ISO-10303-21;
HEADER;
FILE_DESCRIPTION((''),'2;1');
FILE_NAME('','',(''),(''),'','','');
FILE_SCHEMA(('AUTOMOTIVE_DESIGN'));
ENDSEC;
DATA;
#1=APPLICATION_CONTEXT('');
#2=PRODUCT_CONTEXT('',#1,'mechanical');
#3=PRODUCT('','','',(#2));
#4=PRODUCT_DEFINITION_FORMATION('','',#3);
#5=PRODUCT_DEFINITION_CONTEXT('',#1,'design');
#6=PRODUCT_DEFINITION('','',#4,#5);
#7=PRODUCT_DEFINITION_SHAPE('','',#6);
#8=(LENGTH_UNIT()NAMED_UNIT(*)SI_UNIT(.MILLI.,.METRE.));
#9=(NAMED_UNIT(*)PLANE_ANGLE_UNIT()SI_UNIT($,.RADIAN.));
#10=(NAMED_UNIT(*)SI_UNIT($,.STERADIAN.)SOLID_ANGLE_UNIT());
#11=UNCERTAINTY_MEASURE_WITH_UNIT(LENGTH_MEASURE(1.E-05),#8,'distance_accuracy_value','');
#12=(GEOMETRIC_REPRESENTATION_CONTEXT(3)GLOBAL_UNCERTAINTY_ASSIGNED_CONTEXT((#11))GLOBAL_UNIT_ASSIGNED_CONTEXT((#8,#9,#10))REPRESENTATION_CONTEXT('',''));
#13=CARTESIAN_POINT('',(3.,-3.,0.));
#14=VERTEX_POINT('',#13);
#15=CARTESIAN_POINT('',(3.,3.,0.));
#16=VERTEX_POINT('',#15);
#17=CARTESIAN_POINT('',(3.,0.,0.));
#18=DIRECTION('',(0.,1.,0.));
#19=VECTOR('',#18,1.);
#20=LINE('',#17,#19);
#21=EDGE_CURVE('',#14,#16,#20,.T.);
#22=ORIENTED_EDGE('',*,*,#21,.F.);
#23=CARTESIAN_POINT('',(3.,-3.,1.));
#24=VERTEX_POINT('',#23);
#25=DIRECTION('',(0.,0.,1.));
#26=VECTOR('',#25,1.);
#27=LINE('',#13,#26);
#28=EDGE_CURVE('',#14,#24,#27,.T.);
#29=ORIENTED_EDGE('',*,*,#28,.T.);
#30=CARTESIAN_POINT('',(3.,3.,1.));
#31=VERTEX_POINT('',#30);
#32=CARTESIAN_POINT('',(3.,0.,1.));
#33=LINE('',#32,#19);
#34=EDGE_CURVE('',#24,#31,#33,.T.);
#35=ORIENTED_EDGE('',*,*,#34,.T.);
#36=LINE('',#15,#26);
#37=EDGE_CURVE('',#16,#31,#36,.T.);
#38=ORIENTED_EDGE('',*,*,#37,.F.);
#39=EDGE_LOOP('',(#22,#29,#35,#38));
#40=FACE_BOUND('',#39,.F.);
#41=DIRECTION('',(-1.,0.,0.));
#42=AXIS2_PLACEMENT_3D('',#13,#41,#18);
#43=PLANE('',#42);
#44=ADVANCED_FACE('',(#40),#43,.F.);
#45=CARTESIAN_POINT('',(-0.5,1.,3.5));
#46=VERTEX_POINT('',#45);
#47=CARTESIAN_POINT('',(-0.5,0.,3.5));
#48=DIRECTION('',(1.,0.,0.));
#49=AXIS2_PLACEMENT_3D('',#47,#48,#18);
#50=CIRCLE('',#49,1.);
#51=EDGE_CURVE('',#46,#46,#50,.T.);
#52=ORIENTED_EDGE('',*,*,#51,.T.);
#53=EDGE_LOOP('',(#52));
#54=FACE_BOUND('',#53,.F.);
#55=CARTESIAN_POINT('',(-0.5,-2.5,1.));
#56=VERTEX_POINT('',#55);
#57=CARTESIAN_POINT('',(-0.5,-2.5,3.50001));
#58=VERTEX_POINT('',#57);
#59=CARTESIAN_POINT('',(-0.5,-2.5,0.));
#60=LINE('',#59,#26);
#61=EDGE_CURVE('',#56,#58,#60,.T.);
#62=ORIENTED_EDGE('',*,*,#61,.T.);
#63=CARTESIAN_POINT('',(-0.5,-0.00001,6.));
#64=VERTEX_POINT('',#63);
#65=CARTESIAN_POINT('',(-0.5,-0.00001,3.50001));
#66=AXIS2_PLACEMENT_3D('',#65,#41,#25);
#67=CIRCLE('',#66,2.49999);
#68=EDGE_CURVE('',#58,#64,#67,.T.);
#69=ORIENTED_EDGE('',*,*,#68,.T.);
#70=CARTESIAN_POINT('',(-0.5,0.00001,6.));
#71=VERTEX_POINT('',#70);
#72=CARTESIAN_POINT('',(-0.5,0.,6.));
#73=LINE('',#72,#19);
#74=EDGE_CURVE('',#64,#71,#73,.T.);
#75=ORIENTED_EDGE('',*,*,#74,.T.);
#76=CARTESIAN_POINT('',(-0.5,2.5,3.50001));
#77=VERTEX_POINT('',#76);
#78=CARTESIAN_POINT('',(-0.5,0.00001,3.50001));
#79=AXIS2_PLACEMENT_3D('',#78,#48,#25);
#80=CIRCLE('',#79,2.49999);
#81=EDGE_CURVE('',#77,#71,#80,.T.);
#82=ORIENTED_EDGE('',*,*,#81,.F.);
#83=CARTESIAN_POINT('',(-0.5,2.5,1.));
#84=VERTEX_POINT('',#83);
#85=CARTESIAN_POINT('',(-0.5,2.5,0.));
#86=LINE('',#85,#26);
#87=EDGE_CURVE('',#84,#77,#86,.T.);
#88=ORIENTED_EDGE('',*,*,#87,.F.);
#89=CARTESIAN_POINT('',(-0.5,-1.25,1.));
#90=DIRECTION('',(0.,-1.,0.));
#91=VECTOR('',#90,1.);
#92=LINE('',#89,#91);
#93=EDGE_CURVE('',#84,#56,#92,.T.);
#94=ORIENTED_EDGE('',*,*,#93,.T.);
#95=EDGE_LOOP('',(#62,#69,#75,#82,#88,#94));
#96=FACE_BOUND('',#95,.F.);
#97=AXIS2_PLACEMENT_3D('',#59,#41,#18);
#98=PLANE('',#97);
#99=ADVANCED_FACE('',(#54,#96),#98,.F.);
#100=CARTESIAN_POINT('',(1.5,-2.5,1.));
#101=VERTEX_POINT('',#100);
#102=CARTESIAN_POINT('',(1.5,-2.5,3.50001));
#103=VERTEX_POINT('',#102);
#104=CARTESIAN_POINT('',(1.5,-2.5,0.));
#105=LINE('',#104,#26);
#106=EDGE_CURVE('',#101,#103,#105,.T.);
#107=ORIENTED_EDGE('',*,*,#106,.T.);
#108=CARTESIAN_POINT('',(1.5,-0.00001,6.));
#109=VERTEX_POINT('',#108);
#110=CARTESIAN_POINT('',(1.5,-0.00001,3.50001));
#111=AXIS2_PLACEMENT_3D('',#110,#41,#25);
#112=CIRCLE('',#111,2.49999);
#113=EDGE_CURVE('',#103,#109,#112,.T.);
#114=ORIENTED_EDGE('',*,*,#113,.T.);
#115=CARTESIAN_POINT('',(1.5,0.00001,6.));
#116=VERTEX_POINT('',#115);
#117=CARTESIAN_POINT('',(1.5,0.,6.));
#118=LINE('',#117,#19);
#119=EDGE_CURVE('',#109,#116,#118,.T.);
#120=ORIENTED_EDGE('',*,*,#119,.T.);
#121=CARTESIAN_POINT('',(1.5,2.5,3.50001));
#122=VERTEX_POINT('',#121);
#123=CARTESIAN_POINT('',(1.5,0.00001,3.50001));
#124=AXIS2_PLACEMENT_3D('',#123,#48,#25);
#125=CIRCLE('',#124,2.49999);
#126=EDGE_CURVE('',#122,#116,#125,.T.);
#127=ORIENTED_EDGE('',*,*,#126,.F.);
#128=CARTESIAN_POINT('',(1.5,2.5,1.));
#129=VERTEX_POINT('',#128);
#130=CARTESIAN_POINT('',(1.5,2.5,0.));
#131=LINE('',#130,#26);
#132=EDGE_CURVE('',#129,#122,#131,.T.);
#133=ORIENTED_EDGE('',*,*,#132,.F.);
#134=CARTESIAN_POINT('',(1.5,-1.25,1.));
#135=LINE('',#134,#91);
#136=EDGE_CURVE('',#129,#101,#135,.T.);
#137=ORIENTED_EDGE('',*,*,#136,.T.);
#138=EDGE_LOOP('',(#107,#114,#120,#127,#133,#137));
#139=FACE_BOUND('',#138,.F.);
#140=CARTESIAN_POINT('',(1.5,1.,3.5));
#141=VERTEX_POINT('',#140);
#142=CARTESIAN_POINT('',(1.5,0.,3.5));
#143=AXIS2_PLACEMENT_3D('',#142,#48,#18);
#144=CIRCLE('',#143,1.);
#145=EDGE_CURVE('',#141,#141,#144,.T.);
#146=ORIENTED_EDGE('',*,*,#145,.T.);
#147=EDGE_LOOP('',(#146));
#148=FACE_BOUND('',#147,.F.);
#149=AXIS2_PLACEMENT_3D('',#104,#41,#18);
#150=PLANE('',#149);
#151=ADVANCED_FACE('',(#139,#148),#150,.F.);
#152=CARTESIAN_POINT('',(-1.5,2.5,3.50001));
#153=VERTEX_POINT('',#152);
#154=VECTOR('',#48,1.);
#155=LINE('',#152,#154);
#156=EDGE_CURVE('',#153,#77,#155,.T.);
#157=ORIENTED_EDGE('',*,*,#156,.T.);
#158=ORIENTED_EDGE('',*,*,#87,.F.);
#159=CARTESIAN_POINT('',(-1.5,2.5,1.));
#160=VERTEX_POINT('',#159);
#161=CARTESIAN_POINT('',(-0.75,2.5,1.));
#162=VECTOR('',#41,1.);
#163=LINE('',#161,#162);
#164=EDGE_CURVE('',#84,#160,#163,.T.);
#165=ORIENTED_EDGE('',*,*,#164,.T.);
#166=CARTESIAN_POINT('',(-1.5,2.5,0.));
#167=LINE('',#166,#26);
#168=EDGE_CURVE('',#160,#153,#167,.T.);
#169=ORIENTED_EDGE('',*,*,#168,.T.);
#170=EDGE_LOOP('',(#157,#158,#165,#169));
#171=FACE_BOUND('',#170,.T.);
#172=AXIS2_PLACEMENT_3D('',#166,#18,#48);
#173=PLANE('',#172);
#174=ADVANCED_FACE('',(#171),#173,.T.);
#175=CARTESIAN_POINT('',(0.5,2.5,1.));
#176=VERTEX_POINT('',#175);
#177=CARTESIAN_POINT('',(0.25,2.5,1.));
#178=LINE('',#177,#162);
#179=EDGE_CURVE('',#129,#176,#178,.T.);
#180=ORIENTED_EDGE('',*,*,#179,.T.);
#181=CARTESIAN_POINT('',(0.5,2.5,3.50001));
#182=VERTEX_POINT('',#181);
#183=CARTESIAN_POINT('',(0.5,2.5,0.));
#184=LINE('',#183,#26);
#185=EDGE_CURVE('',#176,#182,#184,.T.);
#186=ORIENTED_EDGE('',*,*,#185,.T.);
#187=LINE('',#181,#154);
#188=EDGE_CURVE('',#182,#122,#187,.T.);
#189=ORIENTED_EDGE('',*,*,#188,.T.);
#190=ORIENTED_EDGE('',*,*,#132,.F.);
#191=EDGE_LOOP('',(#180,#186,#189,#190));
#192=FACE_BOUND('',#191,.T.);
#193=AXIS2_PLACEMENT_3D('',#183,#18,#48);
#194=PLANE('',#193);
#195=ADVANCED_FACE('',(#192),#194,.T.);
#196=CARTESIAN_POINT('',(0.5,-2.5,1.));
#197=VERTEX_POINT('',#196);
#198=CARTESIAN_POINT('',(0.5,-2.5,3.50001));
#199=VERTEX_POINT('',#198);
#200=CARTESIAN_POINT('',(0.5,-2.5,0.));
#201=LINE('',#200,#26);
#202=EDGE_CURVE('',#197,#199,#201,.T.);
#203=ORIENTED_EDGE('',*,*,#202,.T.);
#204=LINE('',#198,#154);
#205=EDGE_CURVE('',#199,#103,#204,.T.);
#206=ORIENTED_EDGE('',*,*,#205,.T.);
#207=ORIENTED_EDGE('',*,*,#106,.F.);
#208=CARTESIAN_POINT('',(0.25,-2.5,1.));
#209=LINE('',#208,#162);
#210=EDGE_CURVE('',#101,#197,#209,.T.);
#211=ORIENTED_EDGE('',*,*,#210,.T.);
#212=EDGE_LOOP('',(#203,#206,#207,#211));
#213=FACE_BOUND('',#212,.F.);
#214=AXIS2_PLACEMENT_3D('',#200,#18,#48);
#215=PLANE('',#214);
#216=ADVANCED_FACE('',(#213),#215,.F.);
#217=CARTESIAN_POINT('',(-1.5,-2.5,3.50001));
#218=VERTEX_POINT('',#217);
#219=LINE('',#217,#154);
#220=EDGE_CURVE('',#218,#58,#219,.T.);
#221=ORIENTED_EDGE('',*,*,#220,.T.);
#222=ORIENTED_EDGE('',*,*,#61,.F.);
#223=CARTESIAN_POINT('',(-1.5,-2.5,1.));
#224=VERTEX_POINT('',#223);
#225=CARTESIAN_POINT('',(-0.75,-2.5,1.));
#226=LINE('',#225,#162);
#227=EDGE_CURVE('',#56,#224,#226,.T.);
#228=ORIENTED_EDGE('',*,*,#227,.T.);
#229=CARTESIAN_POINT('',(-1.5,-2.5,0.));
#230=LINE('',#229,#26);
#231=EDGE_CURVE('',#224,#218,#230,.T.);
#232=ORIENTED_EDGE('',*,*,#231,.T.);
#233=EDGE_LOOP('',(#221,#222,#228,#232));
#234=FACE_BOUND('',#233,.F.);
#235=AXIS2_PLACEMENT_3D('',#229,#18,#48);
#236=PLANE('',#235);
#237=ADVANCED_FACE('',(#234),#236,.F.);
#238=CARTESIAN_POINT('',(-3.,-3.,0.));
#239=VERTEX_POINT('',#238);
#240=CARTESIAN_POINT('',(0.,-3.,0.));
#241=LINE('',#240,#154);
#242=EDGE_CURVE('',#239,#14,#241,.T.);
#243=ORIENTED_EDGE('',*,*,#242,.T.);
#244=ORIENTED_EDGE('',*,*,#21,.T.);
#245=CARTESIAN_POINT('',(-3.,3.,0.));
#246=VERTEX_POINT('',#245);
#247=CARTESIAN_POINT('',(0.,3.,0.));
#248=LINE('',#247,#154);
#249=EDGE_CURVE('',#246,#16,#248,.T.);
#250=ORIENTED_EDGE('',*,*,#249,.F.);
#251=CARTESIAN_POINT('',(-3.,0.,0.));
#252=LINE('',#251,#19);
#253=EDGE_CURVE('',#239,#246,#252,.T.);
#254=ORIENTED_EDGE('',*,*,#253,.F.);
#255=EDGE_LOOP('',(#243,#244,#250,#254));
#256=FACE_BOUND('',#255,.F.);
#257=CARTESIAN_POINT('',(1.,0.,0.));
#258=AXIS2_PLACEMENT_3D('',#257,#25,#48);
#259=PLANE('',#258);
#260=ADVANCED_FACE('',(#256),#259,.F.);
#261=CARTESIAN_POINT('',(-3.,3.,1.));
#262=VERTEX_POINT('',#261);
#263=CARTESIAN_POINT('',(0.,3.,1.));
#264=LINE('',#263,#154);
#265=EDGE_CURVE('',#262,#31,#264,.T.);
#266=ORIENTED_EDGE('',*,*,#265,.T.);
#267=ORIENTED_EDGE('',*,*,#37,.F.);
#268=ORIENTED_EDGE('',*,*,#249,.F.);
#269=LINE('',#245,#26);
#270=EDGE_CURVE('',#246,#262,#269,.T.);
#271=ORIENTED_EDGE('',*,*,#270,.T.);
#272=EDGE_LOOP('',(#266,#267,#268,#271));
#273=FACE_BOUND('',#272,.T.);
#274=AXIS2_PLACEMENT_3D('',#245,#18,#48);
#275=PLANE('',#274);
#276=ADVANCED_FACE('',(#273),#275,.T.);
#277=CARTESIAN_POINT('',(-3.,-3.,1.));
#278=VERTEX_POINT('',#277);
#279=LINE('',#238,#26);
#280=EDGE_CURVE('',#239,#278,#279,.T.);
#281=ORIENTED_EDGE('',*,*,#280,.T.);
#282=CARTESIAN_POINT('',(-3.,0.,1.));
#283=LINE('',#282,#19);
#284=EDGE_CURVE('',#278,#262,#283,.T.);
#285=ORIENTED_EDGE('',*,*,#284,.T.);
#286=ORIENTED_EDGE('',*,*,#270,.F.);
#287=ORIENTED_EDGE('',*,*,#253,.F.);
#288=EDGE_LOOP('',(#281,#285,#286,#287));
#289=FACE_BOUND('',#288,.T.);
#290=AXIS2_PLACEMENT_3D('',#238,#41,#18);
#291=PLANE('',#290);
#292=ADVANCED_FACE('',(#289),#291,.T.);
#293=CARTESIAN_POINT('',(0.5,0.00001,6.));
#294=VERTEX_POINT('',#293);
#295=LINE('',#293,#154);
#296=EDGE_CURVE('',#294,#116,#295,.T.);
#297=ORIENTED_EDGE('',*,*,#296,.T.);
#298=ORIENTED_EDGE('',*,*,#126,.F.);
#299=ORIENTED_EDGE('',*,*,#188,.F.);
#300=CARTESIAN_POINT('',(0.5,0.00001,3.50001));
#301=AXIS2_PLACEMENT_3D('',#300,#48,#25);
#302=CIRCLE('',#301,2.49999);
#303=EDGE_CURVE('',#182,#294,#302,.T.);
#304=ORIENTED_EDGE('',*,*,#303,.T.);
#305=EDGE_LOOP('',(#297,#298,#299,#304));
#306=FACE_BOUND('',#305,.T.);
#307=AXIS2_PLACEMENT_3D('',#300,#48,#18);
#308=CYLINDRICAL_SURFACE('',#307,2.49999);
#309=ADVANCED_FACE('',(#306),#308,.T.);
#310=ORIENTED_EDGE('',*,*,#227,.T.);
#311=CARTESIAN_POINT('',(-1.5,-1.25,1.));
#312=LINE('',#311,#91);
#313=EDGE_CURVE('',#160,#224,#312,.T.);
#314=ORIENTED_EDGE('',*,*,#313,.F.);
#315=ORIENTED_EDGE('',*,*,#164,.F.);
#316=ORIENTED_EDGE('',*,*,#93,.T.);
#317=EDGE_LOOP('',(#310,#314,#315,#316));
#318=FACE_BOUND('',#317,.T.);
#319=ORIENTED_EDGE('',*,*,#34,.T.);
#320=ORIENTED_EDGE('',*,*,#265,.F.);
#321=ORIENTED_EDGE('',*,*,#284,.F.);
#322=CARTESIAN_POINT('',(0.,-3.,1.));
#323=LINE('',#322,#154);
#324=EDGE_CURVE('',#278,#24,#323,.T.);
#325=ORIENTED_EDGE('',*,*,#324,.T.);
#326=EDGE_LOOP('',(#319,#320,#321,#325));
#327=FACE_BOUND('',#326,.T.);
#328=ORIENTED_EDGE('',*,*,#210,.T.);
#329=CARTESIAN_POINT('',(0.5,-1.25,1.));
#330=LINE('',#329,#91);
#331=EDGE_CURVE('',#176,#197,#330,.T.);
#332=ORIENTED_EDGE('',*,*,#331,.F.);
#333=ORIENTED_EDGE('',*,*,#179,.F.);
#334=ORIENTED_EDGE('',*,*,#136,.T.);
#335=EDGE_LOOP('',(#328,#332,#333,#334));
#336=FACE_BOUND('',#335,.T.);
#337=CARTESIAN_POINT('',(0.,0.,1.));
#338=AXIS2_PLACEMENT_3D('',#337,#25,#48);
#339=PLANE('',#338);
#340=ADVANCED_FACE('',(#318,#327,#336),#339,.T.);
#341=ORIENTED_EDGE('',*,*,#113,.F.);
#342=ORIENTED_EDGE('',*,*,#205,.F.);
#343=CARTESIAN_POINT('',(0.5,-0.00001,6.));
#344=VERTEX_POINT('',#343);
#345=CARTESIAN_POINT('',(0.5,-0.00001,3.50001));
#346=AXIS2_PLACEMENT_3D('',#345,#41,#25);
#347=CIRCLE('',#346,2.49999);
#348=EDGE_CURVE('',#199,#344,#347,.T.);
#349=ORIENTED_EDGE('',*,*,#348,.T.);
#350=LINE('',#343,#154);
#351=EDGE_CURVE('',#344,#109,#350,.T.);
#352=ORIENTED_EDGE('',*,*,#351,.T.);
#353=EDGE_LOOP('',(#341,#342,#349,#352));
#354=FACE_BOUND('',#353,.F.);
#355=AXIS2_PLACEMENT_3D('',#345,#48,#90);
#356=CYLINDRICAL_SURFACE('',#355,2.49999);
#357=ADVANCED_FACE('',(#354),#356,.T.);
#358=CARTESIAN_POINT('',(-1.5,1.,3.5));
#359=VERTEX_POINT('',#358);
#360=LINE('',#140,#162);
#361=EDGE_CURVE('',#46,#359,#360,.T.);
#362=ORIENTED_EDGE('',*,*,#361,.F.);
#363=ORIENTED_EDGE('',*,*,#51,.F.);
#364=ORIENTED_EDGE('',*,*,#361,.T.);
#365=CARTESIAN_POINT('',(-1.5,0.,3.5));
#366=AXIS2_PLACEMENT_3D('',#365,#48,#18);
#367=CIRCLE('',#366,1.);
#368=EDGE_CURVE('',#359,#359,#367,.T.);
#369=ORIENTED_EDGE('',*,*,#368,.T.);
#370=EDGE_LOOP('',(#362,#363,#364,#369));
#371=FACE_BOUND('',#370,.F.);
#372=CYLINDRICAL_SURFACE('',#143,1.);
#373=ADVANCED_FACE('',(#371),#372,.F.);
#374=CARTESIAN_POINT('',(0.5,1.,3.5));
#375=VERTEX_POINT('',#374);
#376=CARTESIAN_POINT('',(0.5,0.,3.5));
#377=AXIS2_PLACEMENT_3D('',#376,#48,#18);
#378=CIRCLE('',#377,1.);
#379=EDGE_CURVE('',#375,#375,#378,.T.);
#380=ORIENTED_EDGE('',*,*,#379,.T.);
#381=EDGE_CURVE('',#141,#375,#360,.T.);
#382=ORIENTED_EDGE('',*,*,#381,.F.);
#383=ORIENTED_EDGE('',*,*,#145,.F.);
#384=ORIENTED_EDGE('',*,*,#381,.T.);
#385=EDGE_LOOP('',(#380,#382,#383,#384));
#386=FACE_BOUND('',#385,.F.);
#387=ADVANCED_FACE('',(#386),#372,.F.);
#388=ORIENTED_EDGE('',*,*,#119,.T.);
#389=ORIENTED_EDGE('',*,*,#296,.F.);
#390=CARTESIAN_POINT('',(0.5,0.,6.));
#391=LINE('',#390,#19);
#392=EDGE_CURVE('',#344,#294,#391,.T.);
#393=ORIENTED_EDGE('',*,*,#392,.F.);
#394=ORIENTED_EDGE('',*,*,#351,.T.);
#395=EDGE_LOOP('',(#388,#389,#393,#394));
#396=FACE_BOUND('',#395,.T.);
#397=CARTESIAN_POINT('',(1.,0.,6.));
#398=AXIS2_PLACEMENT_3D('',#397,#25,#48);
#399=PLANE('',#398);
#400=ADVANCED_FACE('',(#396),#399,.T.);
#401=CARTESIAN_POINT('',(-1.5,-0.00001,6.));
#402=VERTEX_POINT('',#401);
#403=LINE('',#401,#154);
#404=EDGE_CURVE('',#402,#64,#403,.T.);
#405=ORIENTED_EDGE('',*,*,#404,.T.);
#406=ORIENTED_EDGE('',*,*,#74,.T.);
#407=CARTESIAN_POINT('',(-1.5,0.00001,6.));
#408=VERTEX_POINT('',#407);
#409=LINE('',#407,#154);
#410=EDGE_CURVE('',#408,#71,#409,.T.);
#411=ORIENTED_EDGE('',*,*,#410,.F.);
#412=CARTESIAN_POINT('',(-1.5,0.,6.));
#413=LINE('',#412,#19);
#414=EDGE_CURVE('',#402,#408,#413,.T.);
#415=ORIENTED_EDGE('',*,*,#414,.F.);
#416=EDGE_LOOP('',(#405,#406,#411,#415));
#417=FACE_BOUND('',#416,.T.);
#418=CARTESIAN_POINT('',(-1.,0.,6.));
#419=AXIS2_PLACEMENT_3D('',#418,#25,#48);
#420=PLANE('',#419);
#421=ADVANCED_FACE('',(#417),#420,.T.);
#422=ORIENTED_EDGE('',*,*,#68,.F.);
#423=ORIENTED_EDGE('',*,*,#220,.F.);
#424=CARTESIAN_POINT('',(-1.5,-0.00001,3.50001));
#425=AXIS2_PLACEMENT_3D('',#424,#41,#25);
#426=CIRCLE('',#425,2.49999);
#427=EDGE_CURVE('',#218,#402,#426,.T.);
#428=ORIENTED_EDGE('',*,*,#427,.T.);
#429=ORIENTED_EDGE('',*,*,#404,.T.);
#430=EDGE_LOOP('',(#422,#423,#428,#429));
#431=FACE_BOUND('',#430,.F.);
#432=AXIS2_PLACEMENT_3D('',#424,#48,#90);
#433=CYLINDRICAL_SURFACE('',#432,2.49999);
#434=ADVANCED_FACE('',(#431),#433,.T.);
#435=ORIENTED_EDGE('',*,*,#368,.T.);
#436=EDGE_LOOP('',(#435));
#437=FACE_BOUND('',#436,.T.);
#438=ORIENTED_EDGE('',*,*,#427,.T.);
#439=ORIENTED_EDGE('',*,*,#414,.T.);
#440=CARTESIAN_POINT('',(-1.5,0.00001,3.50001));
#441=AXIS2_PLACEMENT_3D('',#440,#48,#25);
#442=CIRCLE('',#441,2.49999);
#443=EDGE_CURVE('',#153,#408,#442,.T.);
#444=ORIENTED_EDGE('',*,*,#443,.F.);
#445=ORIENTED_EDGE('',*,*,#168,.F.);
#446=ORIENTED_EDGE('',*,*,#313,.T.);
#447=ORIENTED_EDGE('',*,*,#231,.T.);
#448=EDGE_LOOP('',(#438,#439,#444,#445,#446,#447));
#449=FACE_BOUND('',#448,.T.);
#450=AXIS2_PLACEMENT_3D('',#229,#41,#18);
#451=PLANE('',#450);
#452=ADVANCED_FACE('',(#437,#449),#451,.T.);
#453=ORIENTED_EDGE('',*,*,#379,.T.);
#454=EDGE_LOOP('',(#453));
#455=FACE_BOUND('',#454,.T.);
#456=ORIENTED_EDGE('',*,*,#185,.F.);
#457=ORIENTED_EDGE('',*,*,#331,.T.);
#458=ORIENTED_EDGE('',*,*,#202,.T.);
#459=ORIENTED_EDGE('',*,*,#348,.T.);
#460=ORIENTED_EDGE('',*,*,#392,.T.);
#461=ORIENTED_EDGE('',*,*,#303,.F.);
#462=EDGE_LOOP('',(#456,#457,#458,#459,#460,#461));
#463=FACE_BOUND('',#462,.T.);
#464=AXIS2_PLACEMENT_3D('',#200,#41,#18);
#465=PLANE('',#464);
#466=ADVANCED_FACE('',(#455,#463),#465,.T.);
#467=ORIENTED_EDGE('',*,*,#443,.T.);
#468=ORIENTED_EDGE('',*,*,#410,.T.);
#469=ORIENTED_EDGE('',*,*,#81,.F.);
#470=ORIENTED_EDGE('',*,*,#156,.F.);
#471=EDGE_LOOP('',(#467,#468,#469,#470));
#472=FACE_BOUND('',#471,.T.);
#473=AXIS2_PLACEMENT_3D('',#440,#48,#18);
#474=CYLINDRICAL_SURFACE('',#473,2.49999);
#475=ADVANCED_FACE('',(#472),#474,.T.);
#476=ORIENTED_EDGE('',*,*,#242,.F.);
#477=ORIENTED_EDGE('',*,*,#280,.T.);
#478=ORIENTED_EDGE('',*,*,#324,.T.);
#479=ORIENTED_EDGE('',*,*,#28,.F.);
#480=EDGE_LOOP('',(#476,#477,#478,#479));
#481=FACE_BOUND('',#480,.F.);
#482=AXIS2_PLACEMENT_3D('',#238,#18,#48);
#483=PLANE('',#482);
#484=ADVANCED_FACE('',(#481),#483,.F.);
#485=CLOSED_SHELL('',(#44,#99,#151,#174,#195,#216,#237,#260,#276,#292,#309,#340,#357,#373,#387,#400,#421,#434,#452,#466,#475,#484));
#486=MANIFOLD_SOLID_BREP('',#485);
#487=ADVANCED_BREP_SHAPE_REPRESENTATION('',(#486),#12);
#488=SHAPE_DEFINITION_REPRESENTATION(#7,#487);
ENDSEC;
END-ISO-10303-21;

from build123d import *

# Parameters (mm, degrees)
F0_W     = 6
F0_H     = 6
F0_W_2   = 1
F0_H_2   = 5
F1_DEPTH = 1
F2_DEPTH = 6
F3_R     = 2.49999
F4_R     = 1
F5_DEPTH = 25


# Not quite as in the source:
# - a fillet or chamfer is up to 0.001 mm smaller than in the source, because OpenCascade refuses the exact size


with BuildPart() as f1:
    # F0 (on Top) → F1 (new body)
    with BuildSketch(Plane.XY):
        Rectangle(F0_W, F0_H)
        Polygon((2.5, 2.5), (2.5, -2.5), (1.5, -2.5), (0.5, -2.5), (-0.5, -2.5), (-1.5, -2.5), (-2.5, -2.5), (-2.5, 2.5), (-1.5, 2.5), (-0.5, 2.5), (0.5, 2.5), (1.5, 2.5), align=None, mode=Mode.SUBTRACT)
        with Locations((2, 0)):
            Rectangle(F0_W_2, F0_H_2)
        with Locations((1, 0)):
            Rectangle(F0_W_2, F0_H_2)
        Rectangle(F0_W_2, F0_H_2)
        with Locations((-1, 0)):
            Rectangle(F0_W_2, F0_H_2)
        with Locations((-2, 0)):
            Rectangle(F0_W_2, F0_H_2)
    extrude(amount=F1_DEPTH)

    # F0 (on Top) → F2 (join)
    with BuildSketch(Plane.XY):
        with Locations((1, 0)):
            Rectangle(F0_W_2, F0_H_2)
        with Locations((-1, 0)):
            Rectangle(F0_W_2, F0_H_2)
    extrude(amount=F2_DEPTH)

    # F3 (radius 2.5 in the source; OpenCascade refuses exactly that, so slightly less here)
    f3_edges = [f1.edges().sort_by_distance(p)[0] for p in [
        (-1, -2.5, 6),
        (1, -2.5, 6),
        (-1, 2.5, 6),
        (1, 2.5, 6),
    ]]
    fillet(f3_edges, radius=F3_R)

    # F4 (on face) → F5 (cut)
    with BuildSketch(Plane.YZ.offset(1.5)):
        with Locations((0, 3.5)):
            Circle(F4_R)
    extrude(amount=-F5_DEPTH, mode=Mode.SUBTRACT)


solid = f1.part
